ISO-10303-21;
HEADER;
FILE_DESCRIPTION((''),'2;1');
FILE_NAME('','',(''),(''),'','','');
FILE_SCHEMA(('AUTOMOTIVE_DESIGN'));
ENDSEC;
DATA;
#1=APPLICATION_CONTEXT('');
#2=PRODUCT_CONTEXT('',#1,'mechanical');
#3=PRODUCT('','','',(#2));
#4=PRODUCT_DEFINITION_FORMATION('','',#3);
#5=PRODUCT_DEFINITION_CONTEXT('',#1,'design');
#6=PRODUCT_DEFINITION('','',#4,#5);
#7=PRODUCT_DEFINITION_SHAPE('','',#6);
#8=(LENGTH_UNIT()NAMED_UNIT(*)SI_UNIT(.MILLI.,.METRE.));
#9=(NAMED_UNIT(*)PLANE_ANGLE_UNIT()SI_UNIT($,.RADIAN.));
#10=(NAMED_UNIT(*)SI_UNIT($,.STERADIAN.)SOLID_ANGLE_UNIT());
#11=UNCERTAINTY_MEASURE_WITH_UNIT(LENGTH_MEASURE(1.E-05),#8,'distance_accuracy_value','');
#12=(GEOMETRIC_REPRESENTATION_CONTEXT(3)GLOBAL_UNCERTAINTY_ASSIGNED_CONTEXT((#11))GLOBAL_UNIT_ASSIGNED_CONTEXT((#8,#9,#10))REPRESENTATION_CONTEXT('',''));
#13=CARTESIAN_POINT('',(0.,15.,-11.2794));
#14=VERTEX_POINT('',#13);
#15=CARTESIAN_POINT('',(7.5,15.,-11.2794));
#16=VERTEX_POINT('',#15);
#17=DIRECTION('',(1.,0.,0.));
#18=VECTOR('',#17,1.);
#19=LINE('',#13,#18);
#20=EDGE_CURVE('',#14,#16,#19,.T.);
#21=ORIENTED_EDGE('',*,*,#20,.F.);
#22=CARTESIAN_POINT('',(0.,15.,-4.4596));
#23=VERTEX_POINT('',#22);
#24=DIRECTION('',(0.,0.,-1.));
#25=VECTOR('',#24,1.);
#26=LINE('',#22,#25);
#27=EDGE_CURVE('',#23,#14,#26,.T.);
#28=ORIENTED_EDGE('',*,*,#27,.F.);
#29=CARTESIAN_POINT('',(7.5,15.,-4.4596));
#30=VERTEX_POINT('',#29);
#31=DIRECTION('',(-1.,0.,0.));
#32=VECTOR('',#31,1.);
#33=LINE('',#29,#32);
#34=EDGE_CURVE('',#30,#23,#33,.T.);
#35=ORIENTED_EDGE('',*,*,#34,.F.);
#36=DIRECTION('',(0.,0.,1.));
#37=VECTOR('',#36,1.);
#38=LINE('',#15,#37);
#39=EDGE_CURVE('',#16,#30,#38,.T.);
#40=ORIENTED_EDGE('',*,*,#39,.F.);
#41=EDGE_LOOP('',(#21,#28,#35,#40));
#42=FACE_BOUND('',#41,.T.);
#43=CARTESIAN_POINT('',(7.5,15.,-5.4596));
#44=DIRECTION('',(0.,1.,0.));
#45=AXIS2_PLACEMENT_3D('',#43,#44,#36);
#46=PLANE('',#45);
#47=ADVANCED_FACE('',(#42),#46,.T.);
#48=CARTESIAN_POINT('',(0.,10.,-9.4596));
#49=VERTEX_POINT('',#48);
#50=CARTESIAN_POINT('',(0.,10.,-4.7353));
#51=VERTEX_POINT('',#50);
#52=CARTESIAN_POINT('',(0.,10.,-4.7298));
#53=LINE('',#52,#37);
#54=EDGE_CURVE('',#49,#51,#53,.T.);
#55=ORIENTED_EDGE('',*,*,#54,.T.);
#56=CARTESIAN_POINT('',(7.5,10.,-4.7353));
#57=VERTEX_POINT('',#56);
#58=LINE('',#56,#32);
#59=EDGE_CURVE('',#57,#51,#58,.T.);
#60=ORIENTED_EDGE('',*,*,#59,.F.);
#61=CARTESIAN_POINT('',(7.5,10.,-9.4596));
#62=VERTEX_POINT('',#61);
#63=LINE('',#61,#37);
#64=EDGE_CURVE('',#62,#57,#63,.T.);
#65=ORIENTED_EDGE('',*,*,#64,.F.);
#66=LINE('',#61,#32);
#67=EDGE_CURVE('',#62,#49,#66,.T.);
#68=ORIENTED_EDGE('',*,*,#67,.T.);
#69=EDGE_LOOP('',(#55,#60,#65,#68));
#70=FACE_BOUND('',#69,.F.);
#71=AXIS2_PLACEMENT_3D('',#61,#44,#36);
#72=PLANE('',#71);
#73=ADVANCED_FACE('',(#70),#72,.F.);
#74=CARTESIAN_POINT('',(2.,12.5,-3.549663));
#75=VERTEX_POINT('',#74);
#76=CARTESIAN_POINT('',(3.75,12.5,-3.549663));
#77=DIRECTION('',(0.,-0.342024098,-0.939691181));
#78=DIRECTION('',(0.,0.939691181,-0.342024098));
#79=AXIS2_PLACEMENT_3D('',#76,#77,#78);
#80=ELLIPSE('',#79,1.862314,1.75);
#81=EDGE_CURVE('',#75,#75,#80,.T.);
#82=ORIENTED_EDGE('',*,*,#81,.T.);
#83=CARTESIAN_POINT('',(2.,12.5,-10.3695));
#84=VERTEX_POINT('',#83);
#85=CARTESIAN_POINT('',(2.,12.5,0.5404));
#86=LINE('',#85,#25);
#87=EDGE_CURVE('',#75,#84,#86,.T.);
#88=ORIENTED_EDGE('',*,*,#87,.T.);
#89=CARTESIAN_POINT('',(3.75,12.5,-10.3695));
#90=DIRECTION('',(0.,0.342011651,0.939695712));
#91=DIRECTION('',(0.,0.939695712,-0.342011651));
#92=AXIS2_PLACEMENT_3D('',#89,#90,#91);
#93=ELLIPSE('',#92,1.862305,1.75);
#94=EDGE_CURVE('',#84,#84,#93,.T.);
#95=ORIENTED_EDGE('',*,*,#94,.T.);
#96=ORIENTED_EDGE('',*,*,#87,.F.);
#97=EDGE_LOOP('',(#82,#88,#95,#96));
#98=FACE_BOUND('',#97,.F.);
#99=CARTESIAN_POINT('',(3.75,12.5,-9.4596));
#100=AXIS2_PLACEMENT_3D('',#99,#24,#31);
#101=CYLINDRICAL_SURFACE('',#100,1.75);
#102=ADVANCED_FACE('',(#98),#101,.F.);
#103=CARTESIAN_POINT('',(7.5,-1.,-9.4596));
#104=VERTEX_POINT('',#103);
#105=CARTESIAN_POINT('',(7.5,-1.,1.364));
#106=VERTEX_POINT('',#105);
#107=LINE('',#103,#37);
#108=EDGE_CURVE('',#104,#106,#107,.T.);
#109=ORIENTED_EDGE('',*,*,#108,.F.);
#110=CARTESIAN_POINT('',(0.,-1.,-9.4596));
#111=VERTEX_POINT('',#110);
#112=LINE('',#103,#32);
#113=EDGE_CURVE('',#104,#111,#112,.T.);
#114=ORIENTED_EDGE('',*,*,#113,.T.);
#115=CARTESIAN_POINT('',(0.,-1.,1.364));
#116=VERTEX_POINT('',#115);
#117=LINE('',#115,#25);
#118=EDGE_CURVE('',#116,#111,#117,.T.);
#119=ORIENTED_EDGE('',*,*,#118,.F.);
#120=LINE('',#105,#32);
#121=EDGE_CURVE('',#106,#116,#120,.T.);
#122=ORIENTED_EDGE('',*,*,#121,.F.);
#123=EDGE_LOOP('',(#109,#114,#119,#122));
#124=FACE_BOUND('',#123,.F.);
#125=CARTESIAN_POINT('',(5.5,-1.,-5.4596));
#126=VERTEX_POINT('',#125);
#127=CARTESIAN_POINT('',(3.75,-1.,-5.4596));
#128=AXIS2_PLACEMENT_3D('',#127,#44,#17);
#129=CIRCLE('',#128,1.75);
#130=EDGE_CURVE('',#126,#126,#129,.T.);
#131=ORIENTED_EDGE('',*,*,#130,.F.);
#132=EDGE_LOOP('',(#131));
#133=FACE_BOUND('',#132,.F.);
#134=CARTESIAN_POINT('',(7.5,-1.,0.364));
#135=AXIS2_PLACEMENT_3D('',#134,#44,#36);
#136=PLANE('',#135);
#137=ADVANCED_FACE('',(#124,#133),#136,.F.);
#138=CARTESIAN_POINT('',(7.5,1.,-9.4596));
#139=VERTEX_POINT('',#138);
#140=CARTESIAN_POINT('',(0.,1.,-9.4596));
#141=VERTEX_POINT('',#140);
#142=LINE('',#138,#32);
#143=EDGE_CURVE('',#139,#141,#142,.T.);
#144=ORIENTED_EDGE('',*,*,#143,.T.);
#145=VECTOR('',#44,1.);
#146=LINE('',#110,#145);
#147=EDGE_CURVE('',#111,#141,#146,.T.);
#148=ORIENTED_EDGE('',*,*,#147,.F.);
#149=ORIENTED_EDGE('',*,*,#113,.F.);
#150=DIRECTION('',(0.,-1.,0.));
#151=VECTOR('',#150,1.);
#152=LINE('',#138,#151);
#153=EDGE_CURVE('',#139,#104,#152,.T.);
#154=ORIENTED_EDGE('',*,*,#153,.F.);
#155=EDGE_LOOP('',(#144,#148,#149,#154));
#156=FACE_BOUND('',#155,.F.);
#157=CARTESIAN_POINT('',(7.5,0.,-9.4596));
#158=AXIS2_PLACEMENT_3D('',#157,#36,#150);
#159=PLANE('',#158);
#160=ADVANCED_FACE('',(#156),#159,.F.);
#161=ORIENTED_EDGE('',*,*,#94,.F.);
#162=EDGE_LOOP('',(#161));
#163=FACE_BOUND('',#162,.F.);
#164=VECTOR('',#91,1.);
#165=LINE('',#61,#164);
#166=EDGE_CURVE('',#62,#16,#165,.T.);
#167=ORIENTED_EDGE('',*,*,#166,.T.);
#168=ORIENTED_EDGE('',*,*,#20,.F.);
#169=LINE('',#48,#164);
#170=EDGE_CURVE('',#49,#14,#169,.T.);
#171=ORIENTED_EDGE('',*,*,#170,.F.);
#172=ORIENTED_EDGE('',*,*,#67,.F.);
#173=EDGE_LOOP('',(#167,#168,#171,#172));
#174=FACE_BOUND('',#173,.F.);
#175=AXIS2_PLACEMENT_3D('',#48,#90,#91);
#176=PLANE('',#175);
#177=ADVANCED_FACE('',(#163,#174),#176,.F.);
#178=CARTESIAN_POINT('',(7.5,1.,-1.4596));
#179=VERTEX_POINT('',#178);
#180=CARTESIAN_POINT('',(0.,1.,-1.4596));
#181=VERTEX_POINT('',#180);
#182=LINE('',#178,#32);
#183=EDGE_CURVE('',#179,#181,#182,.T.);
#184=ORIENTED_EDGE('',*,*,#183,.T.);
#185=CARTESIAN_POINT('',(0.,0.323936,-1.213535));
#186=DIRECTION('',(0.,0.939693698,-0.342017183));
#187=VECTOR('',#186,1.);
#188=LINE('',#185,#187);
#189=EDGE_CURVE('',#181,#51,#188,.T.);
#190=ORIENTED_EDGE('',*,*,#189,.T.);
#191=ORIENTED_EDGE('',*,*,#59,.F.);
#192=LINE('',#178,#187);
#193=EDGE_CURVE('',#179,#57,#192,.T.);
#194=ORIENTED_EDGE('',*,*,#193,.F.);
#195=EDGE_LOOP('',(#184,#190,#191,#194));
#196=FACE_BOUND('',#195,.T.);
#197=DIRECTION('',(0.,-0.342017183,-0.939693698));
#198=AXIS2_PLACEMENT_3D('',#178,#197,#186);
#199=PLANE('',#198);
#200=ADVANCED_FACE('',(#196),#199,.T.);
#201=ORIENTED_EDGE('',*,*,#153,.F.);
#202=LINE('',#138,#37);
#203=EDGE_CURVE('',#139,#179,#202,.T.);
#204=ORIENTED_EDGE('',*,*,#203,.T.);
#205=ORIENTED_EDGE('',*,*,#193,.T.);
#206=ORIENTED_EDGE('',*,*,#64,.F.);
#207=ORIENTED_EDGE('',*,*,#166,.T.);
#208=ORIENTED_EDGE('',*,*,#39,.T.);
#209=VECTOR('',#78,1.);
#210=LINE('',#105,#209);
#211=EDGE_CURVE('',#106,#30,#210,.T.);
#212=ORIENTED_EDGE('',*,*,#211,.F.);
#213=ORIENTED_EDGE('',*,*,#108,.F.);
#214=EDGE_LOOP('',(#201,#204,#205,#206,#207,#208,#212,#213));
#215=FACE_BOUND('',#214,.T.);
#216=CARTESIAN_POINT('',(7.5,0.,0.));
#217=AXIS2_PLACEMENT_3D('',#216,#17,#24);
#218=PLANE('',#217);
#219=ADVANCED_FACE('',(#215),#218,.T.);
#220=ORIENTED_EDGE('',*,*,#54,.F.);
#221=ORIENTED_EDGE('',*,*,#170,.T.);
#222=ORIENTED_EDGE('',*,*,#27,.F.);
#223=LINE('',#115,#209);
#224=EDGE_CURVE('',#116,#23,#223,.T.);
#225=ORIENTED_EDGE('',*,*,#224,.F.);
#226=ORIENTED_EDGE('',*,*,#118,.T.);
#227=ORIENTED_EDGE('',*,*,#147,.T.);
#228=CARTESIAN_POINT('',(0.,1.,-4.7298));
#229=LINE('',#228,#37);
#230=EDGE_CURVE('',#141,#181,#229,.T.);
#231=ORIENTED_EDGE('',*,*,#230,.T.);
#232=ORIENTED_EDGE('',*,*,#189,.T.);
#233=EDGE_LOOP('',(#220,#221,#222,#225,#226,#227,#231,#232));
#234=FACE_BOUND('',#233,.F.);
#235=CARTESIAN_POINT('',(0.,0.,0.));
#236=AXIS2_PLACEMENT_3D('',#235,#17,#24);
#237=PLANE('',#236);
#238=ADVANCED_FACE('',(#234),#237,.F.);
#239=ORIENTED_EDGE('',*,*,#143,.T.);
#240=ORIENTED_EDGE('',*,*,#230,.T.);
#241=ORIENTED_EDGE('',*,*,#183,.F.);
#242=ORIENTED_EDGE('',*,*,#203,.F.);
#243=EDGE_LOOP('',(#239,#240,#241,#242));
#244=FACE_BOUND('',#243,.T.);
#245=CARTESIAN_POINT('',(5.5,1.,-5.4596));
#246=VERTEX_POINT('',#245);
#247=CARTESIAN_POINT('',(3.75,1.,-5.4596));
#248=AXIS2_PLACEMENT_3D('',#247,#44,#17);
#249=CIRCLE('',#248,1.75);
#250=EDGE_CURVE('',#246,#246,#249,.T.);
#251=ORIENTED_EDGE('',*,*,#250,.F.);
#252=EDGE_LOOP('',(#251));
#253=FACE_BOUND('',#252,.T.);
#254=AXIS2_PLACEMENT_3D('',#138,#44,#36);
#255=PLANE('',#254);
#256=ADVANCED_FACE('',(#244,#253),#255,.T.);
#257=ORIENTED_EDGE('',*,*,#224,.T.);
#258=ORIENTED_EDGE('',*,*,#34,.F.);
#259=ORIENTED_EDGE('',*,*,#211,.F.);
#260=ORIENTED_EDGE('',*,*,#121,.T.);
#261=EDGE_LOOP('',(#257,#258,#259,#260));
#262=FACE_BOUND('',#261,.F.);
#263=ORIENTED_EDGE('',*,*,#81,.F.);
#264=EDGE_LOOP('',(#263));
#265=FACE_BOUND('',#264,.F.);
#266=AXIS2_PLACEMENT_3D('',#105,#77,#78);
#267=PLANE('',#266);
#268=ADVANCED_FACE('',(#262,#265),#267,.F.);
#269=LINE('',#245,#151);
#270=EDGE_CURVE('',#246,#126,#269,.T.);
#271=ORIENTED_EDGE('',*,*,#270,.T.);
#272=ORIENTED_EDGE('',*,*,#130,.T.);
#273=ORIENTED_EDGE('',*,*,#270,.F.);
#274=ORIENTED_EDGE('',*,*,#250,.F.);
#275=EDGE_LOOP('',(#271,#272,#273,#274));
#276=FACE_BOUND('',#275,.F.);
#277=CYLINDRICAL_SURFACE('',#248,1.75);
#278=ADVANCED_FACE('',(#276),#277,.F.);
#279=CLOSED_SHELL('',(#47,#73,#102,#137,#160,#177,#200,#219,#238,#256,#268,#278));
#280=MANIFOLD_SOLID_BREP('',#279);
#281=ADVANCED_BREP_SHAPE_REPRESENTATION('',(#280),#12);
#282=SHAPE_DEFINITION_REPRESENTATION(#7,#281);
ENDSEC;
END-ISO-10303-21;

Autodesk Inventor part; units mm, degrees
ref_plane "YZ Plane" through (0, 0, 0) normal (1, 0, 0) x (0, 1, 0)
ref_plane "XZ Plane" through (0, 0, 0) normal (0, 1, 0) x (-1, 0, 0)
ref_plane "XY Plane" through (0, 0, 0) normal (0, 0, 1) x (1, 0, 0)
sketch "Sketch1" plane through (0, 0, 0) normal (1, 0, 0) x (0, 1, 0)
  line L0 (0, 0) -> (15, -5.4596)
  line L1 (0, 0) -> (0, -9.4596)
  line L2 (15, -5.4596) -> (15, -9.4596)
  line L3 (15, -9.4596) -> (0, -9.4596)
  dimension "d12" = 70
  dimension "d17" = 15
  dimension "d18" = 4
extrude "Extrusion1" add sketch "Sketch1" along normal blind 7.5
sketch "Sketch2" plane through (7.5, 0, 0) normal (1, 0, 0) x (0, 0, -1)
  line L0 (9.4596, 0) -> (9.4596, 15) projected
  line L1 (9.4596, 1) -> (1.4596, 1)
  line L2 (0, 0) -> (9.4596, 0) projected
  line L3 (1.4596, 1) -> (4.7353, 10)
  line L4 (9.4596, 10) -> (4.7353, 10)
  line L5 (9.4596, 1) -> (9.4596, 10)
  point P0 (5.4596, 15)
  dimension "d23" = 8
  dimension "d24" = 10
  dimension "d25" = 70
  dimension "d26" = 4.7243
extrude "Extrusion2" cut sketch "Sketch2" against normal blind 10
sketch "Sketch5" plane through (0, 0, 0) normal (-1, 0, 0) x (0, 0, 1)
  line L0 (-5.4596, 15) -> (-9.4596, 15) projected
  line L1 (-9.4596, 10) -> (-4.7353, 10) projected
  line L2 (-4.7353, 10) -> (-1.4596, 1) projected
  line L3 (-1.4596, 1) -> (-9.4596, 1) projected
  line L4 (-9.4596, 1) -> (-9.4596, 0) projected
  line L5 (-9.4596, 0) -> (0, 0) projected
  line L6 (0, 0) -> (-5.4596, 15) projected
  line L7 (-5.4596, 15) -> (-9.4596, 15) projected
  line L8 (-9.4596, 15) -> (-9.4596, 10) projected
  line L9 (-9.4596, 10) -> (-11.2794, 15)
  line L10 (-5.4596, 15) -> (0, 0) projected
  line L11 (-9.4596, 10) -> (-9.4596, 15) projected
  line L12 (-9.4596, 10) -> (-9.4596, 15)
  line L13 (-9.4596, 15) -> (-11.2794, 15)
extrude "Extrusion5" add sketch "Sketch5" against normal up to surface (7.5 mm away) contours L8 L9 L13
sketch "Sketch6" plane through (7.5, 0, 0) normal (1, 0, 0) x (0, 0, -1)
  line L0 (5.4596, 15) -> (0, 0) projected
  line L1 (0, 0) -> (-0.364, -1)
  line L2 (9.4596, 0) -> (9.4596, 1) projected
  line L3 (9.4596, 0) -> (9.4596, -1)
  line L4 (0, 0) -> (9.4596, 0) projected
  line L5 (0, 0) -> (9.4596, 0)
  line L6 (9.4596, -1) -> (-0.364, -1)
  dimension "d41" = 1
  dimension "d42" = 70
extrude "Extrusion6" add sketch "Sketch6" against normal up to surface (7.5 mm away)
sketch "Sketch4" plane through (7.5, 1, -1.4596) normal (0, 1, 0) x (1, 0, 0)
  line L0 (-7.5, 0) -> (-7.5, 8) projected
  line L1 (-7.5, 8) -> (0, 8) projected
  circle A0 centre (-3.75, 4) radius 1.75
  point P0 (-7.5, -1.4596)
  point P1 (-7.5, 4)
  point P2 (-3.75, 8)
  dimension "d32" = 3.5
extrude "Extrusion4" cut sketch "Sketch4" against normal blind 10
sketch "Sketch7" plane through (7.5, 0, 0) normal (1, 0, 0) x (0, 0, -1)
  line L0 (5.4596, 15) -> (11.2794, 15) projected
  line L1 (-0.364, -1) -> (9.4596, -1) projected
  line L2 (5.4596, 15) -> (4.4596, 15)
  line L3 (-0.364, -1) -> (-1.364, -1)
  line L4 (-1.364, -1) -> (4.4596, 15)
  line L5 (5.4596, 15) -> (-0.364, -1) projected
  line L6 (5.4596, 15) -> (-0.364, -1)
  point P0 (0, 0)
  dimension "d45" = 1
  dimension "d46" = 1
extrude "Extrusion7" add sketch "Sketch7" against normal up to surface (7.5 mm away)
sketch "Sketch3" plane through (7.5, 15, -9.4596) normal (0, 0, -1) x (-1, 0, 0)
  circle A0 centre (3.75, -2.5) radius 1.75
  line L0 (7.5, 0) -> (0, 0) projected
  line L1 (7.5, 0) -> (7.5, -5) projected
  point P0 (7.5, -15)
  point P1 (3.75, 0)
  point P2 (7.5, -2.5)
  dimension "d29" = 3.5
extrude "Extrusion3" cut sketch "Sketch3" against normal blind 10 and the other way blind 5
properties part number "camera-brackets-angle"
